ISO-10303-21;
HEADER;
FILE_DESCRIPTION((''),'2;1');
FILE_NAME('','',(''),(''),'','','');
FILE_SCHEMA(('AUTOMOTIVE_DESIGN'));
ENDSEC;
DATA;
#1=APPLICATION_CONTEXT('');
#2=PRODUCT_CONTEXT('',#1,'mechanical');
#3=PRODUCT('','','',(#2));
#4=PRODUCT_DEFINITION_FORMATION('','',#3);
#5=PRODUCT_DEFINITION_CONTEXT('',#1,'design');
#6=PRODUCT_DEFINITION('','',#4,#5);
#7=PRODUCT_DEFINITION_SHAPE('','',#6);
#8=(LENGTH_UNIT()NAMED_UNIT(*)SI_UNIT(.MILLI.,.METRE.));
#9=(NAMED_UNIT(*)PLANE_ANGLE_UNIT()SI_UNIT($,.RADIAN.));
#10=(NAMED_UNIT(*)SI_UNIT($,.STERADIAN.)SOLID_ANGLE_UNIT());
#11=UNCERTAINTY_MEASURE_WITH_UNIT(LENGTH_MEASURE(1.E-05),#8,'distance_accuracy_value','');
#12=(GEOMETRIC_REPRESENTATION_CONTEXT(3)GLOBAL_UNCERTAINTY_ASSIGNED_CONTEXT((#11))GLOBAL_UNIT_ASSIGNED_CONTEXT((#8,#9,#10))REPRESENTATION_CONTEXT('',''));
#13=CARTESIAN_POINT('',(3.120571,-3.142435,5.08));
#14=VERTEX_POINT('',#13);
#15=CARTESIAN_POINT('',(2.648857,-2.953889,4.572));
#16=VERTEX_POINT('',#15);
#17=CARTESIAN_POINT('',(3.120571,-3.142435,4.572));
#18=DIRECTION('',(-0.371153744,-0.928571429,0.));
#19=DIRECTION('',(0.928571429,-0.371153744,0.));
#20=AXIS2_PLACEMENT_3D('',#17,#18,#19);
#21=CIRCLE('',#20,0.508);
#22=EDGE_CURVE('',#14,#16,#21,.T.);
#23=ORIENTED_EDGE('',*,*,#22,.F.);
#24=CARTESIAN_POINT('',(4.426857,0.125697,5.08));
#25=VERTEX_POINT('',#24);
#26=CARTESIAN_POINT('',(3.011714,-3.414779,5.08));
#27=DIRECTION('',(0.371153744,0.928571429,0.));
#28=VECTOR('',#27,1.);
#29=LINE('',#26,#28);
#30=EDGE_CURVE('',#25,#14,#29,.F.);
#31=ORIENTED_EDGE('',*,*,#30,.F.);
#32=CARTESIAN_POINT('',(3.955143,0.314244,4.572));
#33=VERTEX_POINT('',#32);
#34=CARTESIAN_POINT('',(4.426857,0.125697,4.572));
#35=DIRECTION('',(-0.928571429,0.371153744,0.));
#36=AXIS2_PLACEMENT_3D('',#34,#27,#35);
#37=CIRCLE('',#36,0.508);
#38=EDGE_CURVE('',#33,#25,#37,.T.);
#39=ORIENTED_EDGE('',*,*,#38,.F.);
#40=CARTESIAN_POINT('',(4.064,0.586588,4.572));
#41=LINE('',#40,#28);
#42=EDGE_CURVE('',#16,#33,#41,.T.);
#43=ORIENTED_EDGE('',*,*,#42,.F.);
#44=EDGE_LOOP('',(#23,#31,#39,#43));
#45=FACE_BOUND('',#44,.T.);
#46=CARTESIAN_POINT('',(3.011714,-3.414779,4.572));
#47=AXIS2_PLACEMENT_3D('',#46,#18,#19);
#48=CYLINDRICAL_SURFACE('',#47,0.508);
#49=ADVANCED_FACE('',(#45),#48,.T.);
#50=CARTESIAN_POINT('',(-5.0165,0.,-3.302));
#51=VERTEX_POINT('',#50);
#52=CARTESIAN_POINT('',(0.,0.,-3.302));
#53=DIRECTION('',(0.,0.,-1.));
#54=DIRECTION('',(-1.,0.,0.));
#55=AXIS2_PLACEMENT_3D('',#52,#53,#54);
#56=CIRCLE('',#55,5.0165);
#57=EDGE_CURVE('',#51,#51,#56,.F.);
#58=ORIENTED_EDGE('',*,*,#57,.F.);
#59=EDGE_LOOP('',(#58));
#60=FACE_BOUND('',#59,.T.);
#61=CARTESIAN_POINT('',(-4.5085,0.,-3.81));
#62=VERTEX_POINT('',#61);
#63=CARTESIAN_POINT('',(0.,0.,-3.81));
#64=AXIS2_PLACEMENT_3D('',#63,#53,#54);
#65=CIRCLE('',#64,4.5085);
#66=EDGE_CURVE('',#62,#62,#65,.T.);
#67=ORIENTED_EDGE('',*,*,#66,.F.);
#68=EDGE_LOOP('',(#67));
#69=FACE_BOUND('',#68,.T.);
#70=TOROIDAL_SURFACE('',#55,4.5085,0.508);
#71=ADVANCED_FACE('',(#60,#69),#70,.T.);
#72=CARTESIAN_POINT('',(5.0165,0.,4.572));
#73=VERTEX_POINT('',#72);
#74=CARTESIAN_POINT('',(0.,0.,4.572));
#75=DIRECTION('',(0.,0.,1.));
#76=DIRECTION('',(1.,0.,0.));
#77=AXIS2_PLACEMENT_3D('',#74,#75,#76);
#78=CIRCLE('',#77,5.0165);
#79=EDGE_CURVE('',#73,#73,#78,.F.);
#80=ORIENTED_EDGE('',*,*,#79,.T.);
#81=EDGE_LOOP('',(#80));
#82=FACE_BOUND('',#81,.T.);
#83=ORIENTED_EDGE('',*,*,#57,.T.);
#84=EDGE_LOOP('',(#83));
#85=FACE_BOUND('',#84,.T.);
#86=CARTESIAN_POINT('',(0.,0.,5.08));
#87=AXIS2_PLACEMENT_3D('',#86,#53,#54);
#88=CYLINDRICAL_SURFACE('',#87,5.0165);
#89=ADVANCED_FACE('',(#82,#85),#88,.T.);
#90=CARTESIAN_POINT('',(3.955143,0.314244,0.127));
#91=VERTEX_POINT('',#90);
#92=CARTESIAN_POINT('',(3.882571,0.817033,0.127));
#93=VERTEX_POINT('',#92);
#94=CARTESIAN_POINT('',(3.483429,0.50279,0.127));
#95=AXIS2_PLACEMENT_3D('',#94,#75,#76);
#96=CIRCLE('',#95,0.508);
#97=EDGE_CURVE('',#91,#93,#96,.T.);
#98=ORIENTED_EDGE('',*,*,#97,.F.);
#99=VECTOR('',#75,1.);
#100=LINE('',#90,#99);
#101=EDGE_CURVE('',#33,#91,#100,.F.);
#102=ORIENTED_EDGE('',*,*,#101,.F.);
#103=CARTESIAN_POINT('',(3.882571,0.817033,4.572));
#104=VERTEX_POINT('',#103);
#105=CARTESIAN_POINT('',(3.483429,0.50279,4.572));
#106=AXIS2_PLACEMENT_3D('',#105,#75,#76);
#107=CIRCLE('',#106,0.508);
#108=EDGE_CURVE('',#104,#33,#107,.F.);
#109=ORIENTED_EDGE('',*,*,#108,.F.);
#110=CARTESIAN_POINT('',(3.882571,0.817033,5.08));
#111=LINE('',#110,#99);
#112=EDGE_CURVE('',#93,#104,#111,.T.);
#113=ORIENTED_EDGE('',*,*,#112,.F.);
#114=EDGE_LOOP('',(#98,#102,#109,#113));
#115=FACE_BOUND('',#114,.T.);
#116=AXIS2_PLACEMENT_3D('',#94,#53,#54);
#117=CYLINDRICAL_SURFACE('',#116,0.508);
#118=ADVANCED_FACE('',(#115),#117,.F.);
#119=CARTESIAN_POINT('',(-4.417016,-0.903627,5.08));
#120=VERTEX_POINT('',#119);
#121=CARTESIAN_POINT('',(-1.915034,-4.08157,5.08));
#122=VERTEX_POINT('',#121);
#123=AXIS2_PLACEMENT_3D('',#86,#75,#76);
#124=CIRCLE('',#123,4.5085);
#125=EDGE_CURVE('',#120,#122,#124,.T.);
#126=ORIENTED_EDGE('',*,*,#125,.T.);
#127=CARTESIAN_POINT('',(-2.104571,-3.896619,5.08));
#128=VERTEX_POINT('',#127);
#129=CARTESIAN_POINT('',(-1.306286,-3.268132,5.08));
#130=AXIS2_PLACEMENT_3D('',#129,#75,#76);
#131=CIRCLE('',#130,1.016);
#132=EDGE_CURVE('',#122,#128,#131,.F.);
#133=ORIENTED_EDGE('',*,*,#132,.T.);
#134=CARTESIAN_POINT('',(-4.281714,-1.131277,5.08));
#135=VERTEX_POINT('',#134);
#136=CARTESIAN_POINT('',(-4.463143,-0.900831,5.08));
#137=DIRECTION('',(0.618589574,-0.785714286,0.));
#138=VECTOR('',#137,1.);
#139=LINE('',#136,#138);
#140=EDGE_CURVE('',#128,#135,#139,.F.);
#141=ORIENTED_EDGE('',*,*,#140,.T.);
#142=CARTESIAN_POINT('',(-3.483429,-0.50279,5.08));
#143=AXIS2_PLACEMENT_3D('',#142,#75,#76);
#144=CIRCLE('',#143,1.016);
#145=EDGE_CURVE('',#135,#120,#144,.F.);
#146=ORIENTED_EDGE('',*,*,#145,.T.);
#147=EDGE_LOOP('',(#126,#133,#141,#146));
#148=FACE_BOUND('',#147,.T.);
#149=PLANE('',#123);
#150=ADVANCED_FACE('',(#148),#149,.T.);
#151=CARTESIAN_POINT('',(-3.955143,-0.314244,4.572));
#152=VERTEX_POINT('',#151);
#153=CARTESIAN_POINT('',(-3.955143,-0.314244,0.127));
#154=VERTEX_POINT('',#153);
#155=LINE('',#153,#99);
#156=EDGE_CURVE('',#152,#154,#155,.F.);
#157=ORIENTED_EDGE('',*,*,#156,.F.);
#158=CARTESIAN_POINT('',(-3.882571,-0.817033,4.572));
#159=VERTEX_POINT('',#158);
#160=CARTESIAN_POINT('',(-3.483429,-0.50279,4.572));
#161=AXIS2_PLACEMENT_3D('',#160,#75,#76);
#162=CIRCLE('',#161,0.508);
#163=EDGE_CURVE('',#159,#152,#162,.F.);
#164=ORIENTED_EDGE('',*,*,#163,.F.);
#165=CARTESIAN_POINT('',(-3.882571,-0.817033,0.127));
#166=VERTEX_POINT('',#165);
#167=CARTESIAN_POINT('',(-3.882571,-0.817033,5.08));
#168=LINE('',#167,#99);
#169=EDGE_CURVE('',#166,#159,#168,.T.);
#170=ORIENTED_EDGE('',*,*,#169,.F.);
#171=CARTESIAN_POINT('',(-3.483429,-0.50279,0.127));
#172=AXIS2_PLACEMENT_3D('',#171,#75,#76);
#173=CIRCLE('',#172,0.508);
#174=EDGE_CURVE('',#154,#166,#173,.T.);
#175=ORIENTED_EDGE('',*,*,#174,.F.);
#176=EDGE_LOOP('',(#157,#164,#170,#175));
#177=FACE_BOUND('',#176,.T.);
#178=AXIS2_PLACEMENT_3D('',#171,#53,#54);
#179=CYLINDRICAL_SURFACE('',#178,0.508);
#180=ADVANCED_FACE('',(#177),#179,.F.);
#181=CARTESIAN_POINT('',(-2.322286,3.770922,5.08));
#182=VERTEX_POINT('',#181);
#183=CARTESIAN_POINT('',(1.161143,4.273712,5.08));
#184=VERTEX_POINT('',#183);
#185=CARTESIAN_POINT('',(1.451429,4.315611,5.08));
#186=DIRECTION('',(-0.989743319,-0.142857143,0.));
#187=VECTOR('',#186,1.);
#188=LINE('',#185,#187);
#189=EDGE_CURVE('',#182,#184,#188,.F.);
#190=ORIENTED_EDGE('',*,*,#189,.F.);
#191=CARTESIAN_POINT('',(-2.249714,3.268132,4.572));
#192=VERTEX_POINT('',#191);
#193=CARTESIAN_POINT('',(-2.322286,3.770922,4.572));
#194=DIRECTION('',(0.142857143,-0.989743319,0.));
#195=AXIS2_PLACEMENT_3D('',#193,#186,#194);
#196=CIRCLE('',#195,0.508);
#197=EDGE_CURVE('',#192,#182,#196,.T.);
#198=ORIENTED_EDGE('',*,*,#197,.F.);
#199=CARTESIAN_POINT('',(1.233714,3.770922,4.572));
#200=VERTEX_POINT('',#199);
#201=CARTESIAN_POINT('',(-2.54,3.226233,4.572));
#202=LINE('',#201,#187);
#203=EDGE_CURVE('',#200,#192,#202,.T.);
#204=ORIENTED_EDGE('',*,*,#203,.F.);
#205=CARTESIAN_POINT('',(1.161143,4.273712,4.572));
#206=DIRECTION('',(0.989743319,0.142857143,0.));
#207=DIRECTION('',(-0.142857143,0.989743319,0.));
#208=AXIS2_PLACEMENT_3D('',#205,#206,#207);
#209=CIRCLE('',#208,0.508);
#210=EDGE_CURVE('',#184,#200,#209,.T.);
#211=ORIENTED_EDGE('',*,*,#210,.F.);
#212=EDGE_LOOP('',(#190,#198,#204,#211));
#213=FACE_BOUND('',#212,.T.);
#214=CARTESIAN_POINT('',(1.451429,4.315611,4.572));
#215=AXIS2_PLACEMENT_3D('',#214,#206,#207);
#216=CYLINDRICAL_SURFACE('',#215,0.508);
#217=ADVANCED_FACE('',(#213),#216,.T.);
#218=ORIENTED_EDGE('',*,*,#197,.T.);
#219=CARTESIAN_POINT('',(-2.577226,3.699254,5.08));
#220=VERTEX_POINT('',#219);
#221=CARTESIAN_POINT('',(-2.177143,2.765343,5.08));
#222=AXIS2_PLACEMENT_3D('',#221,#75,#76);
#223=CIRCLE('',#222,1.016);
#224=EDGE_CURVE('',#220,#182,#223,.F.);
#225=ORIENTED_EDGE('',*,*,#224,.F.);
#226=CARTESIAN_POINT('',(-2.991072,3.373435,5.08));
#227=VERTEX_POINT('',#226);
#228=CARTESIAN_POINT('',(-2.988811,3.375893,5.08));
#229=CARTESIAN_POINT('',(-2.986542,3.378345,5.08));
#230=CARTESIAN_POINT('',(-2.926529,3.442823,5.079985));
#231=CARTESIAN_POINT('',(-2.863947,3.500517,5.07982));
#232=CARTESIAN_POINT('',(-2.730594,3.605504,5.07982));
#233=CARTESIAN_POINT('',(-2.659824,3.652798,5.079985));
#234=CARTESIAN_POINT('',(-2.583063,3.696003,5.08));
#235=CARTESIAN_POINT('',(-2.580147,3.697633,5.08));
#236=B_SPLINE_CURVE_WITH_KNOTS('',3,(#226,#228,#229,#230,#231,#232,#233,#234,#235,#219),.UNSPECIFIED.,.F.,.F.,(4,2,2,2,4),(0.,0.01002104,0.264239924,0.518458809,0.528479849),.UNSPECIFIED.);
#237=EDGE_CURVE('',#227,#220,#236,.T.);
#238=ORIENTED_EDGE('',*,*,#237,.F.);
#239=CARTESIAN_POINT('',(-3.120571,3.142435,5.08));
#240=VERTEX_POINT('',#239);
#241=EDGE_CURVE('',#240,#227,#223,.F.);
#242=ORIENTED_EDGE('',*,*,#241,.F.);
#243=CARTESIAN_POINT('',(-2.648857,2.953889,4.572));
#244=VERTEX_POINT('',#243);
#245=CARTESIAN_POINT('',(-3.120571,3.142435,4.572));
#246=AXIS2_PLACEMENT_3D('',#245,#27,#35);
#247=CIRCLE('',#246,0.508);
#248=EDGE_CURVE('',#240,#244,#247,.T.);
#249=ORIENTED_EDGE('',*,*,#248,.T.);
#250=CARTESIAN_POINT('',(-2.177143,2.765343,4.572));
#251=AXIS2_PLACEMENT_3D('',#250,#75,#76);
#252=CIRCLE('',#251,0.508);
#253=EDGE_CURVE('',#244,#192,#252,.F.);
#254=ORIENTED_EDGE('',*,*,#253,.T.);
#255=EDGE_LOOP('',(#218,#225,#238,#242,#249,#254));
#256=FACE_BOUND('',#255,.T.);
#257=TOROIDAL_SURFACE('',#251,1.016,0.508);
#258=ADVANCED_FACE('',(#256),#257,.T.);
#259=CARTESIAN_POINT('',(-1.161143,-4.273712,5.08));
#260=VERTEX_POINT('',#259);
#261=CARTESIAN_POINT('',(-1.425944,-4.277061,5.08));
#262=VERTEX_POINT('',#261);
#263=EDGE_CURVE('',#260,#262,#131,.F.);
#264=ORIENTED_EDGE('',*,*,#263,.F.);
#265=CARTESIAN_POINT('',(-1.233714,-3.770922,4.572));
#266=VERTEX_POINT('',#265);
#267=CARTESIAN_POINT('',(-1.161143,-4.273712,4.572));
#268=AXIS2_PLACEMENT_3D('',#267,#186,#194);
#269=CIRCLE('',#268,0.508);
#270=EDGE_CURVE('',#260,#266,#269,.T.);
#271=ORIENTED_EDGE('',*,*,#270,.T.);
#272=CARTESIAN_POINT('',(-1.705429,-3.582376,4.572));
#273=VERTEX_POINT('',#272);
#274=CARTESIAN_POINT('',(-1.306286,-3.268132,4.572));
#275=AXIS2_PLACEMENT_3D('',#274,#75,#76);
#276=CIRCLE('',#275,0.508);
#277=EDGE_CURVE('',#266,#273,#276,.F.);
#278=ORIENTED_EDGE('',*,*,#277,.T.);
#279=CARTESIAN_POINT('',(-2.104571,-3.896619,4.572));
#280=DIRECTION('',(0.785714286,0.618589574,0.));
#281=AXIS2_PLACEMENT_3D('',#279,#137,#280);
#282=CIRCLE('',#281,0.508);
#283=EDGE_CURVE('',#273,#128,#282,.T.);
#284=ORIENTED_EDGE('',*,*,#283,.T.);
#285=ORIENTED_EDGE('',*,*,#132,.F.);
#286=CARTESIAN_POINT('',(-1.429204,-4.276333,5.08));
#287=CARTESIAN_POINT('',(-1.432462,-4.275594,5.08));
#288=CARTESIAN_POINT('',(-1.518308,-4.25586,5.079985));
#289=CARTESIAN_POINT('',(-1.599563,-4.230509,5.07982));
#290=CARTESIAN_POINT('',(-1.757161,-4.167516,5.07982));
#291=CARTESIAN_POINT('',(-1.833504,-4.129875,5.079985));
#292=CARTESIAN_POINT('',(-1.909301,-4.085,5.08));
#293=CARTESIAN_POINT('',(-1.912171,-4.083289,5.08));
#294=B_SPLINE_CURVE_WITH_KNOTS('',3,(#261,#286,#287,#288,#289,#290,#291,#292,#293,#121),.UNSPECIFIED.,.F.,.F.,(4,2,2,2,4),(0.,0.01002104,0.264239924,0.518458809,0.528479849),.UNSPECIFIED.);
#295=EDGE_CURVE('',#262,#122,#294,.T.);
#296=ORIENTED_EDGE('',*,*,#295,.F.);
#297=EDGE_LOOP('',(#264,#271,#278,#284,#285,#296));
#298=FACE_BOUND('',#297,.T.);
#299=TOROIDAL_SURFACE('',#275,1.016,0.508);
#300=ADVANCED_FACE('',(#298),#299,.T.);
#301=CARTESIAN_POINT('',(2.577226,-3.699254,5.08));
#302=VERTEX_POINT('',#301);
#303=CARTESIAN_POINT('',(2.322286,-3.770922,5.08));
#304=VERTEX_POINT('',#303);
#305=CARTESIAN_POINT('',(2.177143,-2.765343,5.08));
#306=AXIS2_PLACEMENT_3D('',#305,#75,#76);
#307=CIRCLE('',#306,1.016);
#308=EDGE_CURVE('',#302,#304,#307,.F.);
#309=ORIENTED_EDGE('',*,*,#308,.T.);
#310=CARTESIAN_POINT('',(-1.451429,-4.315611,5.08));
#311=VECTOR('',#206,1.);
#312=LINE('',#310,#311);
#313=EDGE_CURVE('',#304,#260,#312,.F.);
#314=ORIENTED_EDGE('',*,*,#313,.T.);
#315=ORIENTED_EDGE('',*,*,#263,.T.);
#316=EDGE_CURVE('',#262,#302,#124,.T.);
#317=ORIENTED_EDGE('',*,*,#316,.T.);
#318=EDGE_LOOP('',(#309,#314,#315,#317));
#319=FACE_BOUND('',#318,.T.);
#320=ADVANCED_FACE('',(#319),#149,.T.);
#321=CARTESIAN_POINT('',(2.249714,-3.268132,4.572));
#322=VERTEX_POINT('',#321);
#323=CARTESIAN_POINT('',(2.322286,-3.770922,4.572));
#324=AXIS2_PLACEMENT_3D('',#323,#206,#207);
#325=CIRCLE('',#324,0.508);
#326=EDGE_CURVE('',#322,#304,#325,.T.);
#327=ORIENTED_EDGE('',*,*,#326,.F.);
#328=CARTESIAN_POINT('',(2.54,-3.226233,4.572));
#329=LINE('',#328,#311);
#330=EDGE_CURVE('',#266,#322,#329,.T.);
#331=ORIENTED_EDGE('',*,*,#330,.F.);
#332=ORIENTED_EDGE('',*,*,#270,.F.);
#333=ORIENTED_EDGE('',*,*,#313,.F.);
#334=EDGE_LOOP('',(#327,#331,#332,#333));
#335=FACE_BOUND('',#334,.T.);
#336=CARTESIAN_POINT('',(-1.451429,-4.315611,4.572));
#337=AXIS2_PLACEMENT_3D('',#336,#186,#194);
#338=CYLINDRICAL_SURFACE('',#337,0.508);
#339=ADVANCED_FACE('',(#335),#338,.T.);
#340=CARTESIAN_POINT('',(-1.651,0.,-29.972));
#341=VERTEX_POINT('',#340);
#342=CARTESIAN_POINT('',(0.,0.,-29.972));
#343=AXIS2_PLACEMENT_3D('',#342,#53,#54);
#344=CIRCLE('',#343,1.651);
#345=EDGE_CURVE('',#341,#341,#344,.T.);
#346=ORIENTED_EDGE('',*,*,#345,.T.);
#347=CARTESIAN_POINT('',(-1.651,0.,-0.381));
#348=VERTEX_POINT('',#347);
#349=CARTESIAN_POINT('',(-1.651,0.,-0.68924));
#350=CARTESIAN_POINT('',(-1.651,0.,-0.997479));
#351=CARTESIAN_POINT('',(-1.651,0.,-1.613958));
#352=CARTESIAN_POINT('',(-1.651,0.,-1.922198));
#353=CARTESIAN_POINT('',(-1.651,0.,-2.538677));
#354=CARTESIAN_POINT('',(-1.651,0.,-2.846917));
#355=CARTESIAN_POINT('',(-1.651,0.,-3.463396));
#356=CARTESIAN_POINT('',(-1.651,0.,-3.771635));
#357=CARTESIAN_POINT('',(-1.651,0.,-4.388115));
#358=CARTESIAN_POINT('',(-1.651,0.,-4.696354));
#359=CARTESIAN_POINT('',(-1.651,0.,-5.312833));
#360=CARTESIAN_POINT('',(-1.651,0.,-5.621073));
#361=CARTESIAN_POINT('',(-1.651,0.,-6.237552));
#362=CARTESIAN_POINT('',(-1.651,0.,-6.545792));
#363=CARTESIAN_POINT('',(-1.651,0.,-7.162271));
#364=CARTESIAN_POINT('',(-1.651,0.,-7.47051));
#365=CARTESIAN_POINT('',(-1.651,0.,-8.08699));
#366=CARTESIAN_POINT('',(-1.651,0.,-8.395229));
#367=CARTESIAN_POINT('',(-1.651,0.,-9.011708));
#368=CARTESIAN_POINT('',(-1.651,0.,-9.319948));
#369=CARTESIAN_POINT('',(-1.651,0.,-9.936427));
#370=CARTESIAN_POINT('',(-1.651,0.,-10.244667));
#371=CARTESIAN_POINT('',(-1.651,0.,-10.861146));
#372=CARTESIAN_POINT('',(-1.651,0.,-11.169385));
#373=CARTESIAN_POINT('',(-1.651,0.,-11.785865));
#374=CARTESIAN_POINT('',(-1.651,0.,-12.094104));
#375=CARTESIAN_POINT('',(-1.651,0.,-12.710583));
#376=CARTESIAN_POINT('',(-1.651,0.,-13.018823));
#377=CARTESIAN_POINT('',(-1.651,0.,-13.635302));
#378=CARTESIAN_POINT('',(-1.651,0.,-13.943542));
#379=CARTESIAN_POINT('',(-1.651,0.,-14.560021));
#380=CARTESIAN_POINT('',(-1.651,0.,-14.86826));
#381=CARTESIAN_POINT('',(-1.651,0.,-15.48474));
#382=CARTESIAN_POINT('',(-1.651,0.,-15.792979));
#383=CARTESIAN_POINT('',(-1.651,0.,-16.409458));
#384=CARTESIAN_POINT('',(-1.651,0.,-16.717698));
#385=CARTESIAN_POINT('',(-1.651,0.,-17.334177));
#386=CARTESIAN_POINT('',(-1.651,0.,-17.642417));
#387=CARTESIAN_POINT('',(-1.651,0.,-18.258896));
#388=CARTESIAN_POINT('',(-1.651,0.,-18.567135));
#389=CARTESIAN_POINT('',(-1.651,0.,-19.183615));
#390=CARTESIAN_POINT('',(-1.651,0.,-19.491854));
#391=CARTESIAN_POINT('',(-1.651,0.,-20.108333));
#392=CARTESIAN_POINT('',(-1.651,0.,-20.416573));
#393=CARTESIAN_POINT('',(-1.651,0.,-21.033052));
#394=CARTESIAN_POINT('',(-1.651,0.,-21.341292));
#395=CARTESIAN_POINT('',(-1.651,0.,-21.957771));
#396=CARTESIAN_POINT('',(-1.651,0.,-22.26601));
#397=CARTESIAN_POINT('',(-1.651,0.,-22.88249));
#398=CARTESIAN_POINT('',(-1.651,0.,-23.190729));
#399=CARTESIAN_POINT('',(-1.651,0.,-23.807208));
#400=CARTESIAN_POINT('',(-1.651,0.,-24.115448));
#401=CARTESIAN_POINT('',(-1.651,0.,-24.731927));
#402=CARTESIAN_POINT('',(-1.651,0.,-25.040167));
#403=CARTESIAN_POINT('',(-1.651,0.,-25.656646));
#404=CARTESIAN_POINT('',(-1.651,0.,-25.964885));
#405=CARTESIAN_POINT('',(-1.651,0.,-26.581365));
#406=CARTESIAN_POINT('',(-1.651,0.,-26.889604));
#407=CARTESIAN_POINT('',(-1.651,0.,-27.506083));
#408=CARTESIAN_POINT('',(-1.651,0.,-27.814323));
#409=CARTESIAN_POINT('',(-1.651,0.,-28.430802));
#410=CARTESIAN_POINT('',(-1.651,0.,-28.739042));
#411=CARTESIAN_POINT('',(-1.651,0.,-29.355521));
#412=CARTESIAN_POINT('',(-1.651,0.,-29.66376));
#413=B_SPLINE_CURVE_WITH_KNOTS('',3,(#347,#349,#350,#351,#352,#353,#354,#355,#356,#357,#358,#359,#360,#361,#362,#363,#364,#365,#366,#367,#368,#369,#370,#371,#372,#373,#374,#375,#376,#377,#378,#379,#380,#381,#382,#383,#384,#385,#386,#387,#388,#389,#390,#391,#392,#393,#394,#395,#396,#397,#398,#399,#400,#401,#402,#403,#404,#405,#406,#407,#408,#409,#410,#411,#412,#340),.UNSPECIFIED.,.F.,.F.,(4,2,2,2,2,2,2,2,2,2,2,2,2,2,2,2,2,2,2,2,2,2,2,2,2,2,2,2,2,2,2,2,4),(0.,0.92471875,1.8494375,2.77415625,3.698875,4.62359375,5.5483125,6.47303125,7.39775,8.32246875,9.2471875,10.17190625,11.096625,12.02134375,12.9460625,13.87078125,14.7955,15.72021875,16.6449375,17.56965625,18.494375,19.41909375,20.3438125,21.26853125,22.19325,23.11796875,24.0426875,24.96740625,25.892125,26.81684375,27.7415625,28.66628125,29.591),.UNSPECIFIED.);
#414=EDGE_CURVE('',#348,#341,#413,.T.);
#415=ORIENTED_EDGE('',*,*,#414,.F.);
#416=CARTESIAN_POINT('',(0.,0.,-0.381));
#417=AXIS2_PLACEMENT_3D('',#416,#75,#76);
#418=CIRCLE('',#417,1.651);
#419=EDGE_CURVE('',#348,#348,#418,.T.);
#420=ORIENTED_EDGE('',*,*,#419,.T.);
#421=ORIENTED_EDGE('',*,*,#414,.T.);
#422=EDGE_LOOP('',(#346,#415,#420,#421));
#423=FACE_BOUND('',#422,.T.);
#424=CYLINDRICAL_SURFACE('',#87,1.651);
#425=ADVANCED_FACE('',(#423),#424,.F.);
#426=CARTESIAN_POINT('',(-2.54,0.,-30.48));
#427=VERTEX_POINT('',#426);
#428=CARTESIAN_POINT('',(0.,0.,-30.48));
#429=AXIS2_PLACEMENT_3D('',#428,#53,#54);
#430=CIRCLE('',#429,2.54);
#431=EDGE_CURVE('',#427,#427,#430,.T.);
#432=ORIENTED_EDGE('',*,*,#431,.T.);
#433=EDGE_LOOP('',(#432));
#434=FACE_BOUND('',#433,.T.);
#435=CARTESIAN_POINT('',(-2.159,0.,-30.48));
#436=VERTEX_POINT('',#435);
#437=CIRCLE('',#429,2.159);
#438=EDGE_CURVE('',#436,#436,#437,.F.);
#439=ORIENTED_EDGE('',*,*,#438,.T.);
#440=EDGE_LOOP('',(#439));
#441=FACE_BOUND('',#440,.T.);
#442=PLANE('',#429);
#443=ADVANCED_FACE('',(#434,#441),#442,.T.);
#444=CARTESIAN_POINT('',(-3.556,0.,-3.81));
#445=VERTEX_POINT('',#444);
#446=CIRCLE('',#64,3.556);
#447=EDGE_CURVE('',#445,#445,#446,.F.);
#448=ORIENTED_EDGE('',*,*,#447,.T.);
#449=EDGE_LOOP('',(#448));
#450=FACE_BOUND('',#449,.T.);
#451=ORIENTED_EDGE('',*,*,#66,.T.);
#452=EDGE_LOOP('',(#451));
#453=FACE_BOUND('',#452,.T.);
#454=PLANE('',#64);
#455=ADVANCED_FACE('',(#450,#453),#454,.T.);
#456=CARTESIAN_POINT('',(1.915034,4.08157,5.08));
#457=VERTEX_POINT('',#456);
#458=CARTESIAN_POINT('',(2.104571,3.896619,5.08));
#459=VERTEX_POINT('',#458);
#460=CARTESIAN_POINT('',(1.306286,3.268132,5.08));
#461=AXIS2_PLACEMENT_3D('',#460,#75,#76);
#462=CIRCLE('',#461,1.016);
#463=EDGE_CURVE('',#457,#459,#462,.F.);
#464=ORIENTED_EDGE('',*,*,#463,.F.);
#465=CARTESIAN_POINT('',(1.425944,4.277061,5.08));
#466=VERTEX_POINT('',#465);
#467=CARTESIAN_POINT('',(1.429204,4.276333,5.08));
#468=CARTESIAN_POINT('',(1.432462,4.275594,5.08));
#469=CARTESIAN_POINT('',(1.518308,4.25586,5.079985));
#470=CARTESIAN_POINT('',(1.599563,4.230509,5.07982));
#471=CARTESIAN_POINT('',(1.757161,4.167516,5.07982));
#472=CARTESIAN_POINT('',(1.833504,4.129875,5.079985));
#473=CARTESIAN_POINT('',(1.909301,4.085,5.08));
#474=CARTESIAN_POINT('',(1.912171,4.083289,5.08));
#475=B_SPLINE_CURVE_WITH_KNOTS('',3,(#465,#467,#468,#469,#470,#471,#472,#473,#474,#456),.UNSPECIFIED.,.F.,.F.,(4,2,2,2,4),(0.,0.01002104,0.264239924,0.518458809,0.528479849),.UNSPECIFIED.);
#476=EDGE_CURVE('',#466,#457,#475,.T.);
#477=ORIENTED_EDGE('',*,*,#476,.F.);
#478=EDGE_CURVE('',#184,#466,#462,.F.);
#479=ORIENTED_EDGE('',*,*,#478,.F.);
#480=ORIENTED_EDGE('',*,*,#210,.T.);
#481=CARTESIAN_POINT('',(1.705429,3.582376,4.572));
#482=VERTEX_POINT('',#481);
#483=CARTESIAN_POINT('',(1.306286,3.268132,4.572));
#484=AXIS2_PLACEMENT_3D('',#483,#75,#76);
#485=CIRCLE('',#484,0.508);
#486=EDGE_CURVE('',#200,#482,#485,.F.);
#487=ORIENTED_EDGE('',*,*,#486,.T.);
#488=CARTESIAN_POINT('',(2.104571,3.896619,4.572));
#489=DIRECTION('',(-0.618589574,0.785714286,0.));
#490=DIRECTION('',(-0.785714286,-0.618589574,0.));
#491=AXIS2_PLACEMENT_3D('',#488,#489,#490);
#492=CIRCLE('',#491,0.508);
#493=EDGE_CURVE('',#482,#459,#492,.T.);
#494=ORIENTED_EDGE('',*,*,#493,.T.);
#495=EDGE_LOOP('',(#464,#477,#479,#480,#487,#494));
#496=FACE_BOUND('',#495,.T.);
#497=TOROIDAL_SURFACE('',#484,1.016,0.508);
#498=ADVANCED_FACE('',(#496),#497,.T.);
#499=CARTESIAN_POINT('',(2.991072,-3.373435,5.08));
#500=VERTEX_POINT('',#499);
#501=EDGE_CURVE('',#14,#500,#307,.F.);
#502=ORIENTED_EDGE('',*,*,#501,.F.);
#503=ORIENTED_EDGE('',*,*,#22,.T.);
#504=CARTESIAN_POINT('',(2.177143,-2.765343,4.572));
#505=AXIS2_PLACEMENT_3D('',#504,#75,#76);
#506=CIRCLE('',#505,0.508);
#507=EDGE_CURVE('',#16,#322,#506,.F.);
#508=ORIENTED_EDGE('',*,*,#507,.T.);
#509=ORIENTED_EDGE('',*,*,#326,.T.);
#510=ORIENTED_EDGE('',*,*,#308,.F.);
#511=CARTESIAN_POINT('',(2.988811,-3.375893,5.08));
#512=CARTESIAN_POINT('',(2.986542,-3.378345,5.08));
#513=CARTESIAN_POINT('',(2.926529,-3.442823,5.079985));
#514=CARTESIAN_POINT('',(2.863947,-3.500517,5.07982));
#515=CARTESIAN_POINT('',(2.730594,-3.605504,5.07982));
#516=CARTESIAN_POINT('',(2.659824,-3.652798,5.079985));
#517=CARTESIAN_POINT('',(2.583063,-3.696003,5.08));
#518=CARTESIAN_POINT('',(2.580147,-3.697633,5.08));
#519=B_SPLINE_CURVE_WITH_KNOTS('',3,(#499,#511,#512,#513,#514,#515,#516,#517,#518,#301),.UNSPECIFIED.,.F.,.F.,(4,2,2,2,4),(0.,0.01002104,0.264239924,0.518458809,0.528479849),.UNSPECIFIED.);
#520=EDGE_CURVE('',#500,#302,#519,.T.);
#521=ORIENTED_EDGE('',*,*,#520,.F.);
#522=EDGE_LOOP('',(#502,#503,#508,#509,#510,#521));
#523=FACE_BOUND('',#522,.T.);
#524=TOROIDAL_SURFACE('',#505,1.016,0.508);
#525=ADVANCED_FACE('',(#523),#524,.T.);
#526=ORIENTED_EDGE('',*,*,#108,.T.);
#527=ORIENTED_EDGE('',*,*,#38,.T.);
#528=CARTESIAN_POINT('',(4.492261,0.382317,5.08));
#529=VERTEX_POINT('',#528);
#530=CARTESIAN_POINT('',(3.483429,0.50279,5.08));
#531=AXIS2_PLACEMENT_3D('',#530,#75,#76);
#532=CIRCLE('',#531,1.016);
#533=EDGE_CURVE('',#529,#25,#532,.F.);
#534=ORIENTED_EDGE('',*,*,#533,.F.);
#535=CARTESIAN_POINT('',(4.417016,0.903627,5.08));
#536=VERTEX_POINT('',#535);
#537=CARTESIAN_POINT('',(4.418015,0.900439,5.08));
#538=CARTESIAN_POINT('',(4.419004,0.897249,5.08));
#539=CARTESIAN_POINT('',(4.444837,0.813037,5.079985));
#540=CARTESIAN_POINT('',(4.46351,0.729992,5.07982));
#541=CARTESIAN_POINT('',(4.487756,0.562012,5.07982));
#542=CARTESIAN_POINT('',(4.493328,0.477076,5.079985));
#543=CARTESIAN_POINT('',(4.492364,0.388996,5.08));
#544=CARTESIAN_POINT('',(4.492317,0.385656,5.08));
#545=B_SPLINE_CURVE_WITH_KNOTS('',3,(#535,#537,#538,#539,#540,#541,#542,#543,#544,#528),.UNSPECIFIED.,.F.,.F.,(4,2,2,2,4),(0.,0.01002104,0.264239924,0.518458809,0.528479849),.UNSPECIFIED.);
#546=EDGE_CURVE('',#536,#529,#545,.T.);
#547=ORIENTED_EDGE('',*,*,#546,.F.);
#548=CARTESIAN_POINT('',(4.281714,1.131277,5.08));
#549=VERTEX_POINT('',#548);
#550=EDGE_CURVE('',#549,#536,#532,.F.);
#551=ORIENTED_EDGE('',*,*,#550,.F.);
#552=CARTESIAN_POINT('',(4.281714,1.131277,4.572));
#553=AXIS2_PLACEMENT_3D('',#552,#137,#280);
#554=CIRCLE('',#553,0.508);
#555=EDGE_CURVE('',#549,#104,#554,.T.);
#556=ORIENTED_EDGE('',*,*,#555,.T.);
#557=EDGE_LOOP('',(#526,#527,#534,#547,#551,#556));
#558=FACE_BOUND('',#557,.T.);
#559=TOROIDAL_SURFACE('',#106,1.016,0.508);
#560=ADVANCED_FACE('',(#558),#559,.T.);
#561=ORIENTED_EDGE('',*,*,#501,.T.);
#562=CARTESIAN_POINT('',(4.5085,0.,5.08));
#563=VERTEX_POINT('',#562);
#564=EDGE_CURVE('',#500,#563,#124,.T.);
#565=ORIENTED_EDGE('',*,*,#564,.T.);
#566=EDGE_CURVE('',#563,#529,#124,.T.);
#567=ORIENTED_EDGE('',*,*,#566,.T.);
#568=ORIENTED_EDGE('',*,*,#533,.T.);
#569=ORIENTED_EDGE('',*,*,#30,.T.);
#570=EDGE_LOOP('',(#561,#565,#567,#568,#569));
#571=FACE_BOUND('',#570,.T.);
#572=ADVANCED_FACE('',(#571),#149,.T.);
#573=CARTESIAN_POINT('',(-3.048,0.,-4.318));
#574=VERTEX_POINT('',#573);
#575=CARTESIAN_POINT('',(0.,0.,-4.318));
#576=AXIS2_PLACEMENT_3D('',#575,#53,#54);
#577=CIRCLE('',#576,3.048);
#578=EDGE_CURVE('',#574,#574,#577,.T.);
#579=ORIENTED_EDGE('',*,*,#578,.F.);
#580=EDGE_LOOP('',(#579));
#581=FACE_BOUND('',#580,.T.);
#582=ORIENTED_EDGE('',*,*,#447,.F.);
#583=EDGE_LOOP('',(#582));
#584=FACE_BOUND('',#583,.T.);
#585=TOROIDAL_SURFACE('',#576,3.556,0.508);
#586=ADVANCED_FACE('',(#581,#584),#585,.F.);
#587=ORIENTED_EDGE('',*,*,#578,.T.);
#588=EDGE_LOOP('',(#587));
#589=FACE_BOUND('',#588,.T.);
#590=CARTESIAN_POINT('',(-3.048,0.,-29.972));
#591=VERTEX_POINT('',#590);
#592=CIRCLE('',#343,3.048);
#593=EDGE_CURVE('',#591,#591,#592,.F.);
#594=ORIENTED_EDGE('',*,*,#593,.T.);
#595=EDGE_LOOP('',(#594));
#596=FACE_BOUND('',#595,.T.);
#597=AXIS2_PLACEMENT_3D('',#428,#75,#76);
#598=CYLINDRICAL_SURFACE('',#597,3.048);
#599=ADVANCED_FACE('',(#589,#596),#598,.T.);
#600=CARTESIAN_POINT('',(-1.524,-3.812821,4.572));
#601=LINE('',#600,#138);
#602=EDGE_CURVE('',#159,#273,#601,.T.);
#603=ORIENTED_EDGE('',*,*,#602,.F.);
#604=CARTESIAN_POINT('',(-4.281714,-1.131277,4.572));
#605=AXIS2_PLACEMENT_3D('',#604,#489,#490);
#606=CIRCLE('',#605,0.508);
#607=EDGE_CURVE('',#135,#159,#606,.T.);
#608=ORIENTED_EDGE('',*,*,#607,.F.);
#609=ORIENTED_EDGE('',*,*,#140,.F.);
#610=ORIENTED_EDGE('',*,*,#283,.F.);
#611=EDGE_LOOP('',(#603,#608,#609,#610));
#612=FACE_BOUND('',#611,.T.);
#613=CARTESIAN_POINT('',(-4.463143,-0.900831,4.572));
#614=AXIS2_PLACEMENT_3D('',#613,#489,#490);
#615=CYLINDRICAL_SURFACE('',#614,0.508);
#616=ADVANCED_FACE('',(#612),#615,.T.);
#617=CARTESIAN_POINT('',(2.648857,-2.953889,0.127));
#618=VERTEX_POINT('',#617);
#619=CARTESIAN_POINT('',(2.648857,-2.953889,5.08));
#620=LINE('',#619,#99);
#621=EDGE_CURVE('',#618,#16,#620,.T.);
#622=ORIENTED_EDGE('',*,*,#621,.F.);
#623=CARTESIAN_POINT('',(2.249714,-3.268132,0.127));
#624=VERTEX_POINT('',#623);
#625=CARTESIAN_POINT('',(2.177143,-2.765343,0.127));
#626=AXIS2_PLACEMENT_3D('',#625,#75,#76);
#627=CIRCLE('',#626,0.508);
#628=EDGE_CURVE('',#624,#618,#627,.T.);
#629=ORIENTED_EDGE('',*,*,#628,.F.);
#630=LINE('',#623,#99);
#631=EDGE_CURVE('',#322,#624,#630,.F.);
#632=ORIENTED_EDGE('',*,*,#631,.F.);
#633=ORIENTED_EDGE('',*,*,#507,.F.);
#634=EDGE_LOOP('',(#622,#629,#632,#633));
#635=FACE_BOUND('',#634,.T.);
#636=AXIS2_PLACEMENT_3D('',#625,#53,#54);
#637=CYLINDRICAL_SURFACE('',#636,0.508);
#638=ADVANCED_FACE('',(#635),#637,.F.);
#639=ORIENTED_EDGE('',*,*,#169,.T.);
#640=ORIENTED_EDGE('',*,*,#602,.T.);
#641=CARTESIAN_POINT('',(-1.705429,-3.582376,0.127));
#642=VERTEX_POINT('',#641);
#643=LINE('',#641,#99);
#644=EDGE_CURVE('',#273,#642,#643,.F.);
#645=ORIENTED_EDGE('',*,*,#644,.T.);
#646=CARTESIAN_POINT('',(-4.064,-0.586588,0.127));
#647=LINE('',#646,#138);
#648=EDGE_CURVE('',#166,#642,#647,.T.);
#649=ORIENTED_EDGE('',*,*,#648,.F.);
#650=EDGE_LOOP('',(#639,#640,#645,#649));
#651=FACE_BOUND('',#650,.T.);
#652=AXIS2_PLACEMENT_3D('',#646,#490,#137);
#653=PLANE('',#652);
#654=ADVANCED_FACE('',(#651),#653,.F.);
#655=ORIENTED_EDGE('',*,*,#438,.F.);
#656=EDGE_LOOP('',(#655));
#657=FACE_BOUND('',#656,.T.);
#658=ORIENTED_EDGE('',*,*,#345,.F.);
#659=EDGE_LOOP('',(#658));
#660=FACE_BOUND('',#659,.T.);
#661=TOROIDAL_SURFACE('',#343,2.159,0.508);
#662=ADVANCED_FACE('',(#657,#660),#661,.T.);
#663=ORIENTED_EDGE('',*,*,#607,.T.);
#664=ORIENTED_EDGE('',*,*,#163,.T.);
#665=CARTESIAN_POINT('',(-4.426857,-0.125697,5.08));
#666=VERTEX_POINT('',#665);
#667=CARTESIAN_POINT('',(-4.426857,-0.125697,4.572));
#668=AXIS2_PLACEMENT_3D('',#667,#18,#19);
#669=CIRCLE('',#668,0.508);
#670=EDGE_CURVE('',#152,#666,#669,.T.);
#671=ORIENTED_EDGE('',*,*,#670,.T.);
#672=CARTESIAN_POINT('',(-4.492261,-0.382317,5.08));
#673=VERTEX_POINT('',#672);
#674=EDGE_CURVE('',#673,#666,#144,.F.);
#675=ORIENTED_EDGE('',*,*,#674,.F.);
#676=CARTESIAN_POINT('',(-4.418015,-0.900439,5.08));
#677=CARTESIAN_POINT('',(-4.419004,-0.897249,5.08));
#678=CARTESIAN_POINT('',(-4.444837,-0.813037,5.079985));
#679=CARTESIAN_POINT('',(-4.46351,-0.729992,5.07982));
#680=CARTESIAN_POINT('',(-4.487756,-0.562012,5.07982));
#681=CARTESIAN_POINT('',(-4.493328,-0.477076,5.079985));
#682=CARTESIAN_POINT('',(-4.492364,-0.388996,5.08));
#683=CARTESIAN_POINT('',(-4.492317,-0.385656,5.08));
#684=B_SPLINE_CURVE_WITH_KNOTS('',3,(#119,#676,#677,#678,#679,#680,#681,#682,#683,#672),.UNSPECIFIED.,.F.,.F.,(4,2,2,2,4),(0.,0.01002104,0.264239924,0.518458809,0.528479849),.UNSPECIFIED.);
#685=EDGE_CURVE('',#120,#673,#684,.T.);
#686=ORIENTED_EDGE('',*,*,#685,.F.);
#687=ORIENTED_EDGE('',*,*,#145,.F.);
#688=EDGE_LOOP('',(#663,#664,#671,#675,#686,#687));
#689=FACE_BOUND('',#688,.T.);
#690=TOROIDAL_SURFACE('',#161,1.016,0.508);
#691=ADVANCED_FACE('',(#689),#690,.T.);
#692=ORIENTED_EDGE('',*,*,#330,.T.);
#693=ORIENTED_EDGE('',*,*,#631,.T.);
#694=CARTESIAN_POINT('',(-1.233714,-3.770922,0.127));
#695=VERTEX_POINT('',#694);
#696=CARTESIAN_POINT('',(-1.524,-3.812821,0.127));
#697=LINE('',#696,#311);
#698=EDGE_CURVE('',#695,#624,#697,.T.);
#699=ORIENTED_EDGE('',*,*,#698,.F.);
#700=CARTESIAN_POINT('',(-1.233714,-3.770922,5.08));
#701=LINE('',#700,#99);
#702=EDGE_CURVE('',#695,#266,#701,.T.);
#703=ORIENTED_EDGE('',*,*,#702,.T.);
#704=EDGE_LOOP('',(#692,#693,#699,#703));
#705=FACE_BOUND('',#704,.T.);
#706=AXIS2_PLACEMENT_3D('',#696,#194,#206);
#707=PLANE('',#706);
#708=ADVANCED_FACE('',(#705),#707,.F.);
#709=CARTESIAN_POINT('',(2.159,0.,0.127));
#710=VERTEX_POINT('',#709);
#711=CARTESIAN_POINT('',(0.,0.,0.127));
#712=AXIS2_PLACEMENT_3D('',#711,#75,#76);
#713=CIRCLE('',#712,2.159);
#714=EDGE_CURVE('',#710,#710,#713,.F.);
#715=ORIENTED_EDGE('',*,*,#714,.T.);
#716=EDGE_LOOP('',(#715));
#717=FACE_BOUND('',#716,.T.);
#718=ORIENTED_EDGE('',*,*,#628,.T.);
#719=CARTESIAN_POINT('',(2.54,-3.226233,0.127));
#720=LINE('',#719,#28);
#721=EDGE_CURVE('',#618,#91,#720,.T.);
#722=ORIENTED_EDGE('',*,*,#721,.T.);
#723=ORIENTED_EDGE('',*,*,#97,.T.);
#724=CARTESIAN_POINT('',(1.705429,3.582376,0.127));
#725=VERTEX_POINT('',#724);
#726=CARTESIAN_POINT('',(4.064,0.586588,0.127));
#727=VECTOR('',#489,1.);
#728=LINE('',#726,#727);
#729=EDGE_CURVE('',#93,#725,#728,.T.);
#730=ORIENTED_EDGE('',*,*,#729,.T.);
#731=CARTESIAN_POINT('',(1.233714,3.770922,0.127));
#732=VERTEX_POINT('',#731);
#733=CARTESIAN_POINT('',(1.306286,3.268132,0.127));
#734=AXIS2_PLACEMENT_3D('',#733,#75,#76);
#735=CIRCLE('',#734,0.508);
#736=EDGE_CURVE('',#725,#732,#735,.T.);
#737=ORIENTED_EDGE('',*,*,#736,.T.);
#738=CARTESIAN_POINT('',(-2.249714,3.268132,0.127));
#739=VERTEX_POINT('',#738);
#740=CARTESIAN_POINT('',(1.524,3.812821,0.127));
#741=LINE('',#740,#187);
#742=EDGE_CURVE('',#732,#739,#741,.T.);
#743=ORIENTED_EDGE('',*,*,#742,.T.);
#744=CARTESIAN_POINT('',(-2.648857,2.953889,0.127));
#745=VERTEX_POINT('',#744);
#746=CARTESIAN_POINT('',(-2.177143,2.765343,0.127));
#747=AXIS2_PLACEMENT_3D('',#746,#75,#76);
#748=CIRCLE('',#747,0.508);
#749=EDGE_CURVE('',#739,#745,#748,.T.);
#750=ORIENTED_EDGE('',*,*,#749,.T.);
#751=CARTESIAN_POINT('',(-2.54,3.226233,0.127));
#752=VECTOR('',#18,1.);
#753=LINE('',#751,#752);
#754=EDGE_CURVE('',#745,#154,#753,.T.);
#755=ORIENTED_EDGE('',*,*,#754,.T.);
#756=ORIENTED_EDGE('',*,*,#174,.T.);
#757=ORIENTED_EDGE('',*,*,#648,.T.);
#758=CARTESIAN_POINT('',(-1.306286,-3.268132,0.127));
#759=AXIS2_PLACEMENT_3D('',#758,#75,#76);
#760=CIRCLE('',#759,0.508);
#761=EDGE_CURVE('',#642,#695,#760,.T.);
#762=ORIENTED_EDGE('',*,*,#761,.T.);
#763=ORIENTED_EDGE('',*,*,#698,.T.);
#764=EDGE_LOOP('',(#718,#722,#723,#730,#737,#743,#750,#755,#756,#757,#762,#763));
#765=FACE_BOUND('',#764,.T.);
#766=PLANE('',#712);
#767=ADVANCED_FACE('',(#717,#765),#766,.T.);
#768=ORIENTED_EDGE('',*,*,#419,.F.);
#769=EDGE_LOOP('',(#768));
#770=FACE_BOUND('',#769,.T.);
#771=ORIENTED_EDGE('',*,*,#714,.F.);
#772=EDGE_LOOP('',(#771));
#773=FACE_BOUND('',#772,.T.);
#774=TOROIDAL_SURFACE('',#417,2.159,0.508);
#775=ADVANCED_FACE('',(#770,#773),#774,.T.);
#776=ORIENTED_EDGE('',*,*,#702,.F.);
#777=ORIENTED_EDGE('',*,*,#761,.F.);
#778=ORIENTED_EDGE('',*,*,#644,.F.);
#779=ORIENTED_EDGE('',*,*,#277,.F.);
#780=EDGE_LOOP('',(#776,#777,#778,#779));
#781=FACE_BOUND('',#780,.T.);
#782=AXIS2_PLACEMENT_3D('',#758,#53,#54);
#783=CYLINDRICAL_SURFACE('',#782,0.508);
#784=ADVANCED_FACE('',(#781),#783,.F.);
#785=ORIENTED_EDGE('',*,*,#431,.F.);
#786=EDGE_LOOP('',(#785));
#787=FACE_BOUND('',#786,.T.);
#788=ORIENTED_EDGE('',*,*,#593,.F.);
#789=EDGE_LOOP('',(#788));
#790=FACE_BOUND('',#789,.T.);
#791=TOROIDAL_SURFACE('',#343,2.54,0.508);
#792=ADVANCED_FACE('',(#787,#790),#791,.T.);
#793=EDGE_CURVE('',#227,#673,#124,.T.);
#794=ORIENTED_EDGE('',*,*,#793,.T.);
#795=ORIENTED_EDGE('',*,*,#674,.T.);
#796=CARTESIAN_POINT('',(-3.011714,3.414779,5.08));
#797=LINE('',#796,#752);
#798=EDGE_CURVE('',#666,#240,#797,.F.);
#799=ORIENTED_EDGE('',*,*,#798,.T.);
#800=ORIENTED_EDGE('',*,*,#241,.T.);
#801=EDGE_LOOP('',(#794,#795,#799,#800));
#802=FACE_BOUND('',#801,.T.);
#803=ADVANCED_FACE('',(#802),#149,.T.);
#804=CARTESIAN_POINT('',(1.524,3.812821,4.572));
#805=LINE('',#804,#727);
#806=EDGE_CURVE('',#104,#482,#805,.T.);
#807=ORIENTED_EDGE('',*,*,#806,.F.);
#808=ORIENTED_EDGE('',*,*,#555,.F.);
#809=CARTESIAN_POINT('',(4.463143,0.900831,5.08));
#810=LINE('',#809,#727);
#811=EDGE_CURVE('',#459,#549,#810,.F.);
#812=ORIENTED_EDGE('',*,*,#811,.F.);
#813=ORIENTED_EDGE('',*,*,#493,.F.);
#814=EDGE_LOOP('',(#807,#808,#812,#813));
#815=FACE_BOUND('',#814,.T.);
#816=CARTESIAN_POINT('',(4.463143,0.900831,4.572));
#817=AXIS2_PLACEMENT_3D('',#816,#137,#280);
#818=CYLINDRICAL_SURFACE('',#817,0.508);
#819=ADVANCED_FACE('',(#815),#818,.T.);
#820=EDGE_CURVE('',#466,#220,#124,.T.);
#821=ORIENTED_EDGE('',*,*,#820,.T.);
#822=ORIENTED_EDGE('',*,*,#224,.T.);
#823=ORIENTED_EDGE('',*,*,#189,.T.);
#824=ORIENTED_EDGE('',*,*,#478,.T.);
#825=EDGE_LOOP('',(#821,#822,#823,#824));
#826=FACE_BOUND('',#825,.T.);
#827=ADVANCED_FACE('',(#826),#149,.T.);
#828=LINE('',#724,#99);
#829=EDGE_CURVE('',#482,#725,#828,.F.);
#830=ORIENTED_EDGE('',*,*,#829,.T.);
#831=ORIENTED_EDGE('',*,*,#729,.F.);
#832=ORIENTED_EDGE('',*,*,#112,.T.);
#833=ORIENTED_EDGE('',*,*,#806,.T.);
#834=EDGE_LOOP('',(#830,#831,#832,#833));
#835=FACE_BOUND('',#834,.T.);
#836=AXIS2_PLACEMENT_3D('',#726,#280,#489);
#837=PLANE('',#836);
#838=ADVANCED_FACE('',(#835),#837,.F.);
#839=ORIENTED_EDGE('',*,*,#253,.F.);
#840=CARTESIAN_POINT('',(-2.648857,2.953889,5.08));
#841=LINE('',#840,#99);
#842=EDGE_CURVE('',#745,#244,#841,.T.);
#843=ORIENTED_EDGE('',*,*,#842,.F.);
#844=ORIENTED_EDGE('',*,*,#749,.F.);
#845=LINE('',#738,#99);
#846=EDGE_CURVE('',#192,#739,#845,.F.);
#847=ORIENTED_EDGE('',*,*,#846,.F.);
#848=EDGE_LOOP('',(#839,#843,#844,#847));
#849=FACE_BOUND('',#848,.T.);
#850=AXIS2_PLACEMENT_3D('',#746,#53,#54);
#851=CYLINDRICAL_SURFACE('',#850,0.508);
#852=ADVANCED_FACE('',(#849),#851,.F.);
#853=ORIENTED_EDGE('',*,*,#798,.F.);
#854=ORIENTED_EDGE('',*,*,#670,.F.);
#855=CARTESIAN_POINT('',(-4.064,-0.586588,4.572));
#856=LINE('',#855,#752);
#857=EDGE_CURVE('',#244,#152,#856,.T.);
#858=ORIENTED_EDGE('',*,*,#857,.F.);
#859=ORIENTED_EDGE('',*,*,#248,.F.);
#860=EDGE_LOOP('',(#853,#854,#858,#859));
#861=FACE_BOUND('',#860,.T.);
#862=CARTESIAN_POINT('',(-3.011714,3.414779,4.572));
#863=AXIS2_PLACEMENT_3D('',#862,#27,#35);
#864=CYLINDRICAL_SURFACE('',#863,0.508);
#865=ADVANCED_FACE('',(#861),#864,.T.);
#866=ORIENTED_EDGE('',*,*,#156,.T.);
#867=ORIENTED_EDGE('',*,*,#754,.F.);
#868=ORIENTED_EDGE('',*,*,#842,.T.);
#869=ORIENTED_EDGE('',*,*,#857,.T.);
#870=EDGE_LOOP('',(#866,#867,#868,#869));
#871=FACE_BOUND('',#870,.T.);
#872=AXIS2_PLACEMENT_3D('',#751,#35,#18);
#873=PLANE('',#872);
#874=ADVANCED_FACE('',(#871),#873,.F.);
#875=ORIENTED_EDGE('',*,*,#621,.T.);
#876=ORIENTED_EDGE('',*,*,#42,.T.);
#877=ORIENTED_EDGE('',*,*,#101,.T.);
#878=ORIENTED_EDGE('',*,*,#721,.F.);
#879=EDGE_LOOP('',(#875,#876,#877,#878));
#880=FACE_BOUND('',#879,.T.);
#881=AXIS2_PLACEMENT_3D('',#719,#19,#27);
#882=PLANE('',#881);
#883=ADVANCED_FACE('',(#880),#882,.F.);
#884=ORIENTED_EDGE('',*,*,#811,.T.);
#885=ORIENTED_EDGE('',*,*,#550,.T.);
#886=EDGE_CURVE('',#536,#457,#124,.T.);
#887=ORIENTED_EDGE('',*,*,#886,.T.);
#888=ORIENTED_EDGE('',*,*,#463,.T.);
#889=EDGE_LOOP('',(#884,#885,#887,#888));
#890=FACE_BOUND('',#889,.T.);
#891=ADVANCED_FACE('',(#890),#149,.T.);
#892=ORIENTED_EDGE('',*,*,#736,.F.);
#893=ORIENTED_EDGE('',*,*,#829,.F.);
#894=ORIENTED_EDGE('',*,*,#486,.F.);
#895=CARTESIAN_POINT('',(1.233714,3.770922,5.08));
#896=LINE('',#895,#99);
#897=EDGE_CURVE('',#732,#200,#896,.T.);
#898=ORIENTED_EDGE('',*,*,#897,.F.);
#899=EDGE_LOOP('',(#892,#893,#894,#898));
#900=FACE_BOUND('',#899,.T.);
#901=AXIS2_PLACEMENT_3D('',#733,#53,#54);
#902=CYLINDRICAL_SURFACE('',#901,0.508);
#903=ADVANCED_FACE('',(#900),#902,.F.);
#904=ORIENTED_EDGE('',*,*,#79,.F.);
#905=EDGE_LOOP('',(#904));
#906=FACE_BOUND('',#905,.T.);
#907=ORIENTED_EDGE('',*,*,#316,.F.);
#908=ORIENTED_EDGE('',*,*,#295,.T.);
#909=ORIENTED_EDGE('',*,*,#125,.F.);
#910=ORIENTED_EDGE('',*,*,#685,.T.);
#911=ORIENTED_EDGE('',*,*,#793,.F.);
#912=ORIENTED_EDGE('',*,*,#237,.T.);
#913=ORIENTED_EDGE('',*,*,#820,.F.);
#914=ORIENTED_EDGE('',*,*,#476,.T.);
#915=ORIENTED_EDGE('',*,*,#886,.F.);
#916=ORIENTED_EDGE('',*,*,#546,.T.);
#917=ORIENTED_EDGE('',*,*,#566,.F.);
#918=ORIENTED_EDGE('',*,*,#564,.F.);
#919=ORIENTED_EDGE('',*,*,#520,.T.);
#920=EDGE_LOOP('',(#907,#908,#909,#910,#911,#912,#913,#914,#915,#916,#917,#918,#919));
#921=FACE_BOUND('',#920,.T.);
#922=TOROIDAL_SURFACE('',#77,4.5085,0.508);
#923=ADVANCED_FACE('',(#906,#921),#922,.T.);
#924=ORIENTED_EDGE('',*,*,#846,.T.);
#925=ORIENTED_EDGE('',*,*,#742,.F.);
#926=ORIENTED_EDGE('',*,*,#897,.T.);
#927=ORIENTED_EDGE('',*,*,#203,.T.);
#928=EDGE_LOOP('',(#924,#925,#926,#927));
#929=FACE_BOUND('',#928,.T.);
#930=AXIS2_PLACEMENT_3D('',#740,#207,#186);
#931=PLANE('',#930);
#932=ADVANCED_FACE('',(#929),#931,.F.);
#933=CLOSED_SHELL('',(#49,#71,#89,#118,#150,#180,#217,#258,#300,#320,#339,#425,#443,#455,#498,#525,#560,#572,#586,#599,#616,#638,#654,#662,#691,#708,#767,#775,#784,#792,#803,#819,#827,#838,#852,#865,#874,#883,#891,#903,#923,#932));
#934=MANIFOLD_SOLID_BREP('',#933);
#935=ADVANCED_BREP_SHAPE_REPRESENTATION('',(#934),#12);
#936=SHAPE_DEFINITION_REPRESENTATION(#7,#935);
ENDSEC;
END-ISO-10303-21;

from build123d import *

# Parameters (mm, degrees)
SKETCH1_R           = 5.0165
BOSS_EXTRUDE1_DEPTH = 5.08
BOSS_EXTRUDE2_START = 3.81
SKETCH3_R           = 5.0165
BOSS_EXTRUDE2_DEPTH = 3.81
SKETCH5_R           = 3.048
BOSS_EXTRUDE3_DEPTH = 26.67
SKETCH6_R           = 1.651
CUT_EXTRUDE3_DEPTH  = 37.260779701
CUT_EXTRUDE4_DEPTH  = 4.953
FILLET1_R           = 0.508


with BuildPart() as part:
    # Sketch1 → Boss-Extrude1 (new body)
    with BuildSketch(Plane.XY):
        Circle(SKETCH1_R)
    extrude(amount=BOSS_EXTRUDE1_DEPTH)

    # Sketch3 → Boss-Extrude2 (add)
    with BuildSketch(Plane(origin=(0, 0, 0), x_dir=(-1, 0, 0), z_dir=(0, 0, -1)).offset(BOSS_EXTRUDE2_START)):
        Circle(SKETCH3_R)
    extrude(amount=-BOSS_EXTRUDE2_DEPTH)

    # Sketch5 → Boss-Extrude3 (add)
    with BuildSketch(Plane(origin=(0, 0, -3.81), x_dir=(-1, 0, 0), z_dir=(0, 0, -1))):
        Circle(SKETCH5_R)
    extrude(amount=BOSS_EXTRUDE3_DEPTH)

    # Sketch6 → Cut-Extrude3 (cut, through all)
    with BuildSketch(Plane(origin=(0, 0, -30.48), x_dir=(-1, 0, 0), z_dir=(0, 0, -1))):
        Circle(SKETCH6_R)
    extrude(amount=-CUT_EXTRUDE3_DEPTH, mode=Mode.SUBTRACT)

    # Sketch8 → Cut-Extrude4 (cut)
    with BuildSketch(Plane.XY.offset(5.08)):
        Polygon((1.524, 3.812821178), (-2.54, 3.226233304), (-4.064, -0.586587873), (-1.524, -3.812821178), (2.54, -3.226233304), (4.064, 0.586587873), align=None)
    extrude(amount=-CUT_EXTRUDE4_DEPTH, mode=Mode.SUBTRACT)

    # Fillet1
    # the kernel refuses this fillet: 0.508 mm, written as the material it adds along each edge
    with BuildSketch(Plane(origin=(1.524, 3.812821178, 5.08), x_dir=(-0.9897433186107871, -0.14285714285714157, 0), z_dir=(0, 0, -1))) as fillet1_piece_1:
        with BuildLine():
            CenterArc((FILLET1_R * 0.57735026919, -FILLET1_R), FILLET1_R, 90, 60)
            Line((-FILLET1_R * 0.288675134595, -FILLET1_R * 0.5), (0, 0))
            Line((0, 0), (FILLET1_R * 0.57735026919, 0))
        make_face()
    extrude(amount=5.686234842)
    with BuildSketch(Plane(origin=(4.064, 0.586587873, 5.08), x_dir=(-0.37115374447904703, -0.9285714285714277, 0), z_dir=(0, 0, -1)), Plane(origin=(2.54, -3.226233304, 5.08), x_dir=(-0.9897433186107876, -0.14285714285713977, 0), z_dir=(0, 0, -1)), Plane(origin=(-1.524, -3.812821178, 5.08), x_dir=(-0.6185895741317401, 0.7857142857142871, 0), z_dir=(0, 0, -1)), Plane(origin=(-4.064, -0.586587873, 5.08), x_dir=(0.3711537444790479, 0.9285714285714274, 0), z_dir=(0, 0, -1)), Plane(origin=(-2.54, 3.226233304, 5.08), x_dir=(0.9897433186107873, 0.14285714285714018, 0), z_dir=(0, 0, -1))) as fillet1_piece_2:
        with BuildLine():
            CenterArc((FILLET1_R * 0.57735026919, FILLET1_R), FILLET1_R, 210, 60)
            Line((-FILLET1_R * 0.288675134595, FILLET1_R * 0.5), (0, 0))
            Line((0, 0), (FILLET1_R * 0.57735026919, 0))
        make_face()
    extrude(amount=5.686234842)
    with BuildSketch(Plane(origin=(0, 0, -3.81), x_dir=(-1, 0, 0), z_dir=(0, -1, 0))) as fillet1_piece_3:
        with BuildLine():
            CenterArc((3.048 + FILLET1_R, FILLET1_R), FILLET1_R, 180, 90)
            Line((3.048, FILLET1_R), (3.048, 0))
            Line((3.048, 0), (3.048 + FILLET1_R, 0))
        make_face()
    revolve(axis=Axis((0, 0, -3.81), (0, 0, -1)))
    # the kernel refuses this fillet: 0.508 mm, written as the material it takes off along each edge
    with BuildSketch(Plane(origin=(0, 0, -30.48), x_dir=(-1, 0, 0), z_dir=(0, -1, 0))) as fillet1_2_piece_1:
        with BuildLine():
            CenterArc((1.651 + FILLET1_R, -FILLET1_R), FILLET1_R, 90, 90)
            Line((1.651 + FILLET1_R, 0), (1.651, 0))
            Line((1.651, 0), (1.651, -FILLET1_R))
        make_face()
    revolve(axis=Axis((0, 0, -30.48), (0, 0, -1)), mode=Mode.SUBTRACT)
    with BuildSketch(Plane(origin=(0, 0, 0.127), x_dir=(-1, 0, 0), z_dir=(0, -1, 0))) as fillet1_2_piece_2:
        with BuildLine():
            CenterArc((1.651 + FILLET1_R, FILLET1_R), FILLET1_R, 180, 90)
            Line((1.651, FILLET1_R), (1.651, 0))
            Line((1.651, 0), (1.651 + FILLET1_R, 0))
        make_face()
    revolve(axis=Axis((0, 0, 0.127), (0, 0, -1)), mode=Mode.SUBTRACT)
    with BuildSketch(Plane(origin=(0, 0, 5.08), x_dir=(1, 0, 0), z_dir=(0, -1, 0))) as fillet1_2_piece_3:
        with BuildLine():
            CenterArc((5.0165 - FILLET1_R, -FILLET1_R), FILLET1_R, 0, 90)
            Line((5.0165 - FILLET1_R, 0), (5.0165, 0))
            Line((5.0165, 0), (5.0165, -FILLET1_R))
        make_face()
    revolve(axis=Axis((0, 0, 5.08), (0, 0, 1)), mode=Mode.SUBTRACT)
    with BuildSketch(Plane(origin=(0, 0, -3.81), x_dir=(-1, 0, 0), z_dir=(0, -1, 0))) as fillet1_2_piece_4:
        with BuildLine():
            CenterArc((5.0165 - FILLET1_R, -FILLET1_R), FILLET1_R, 0, 90)
            Line((5.0165 - FILLET1_R, 0), (5.0165, 0))
            Line((5.0165, 0), (5.0165, -FILLET1_R))
        make_face()
    revolve(axis=Axis((0, 0, -3.81), (0, 0, -1)), mode=Mode.SUBTRACT)
    with BuildSketch(Plane(origin=(0, 0, -30.48), x_dir=(-1, 0, 0), z_dir=(0, -1, 0))) as fillet1_2_piece_5:
        with BuildLine():
            CenterArc((3.048 - FILLET1_R, -FILLET1_R), FILLET1_R, 0, 90)
            Line((3.048 - FILLET1_R, 0), (3.048, 0))
            Line((3.048, 0), (3.048, -FILLET1_R))
        make_face()
    revolve(axis=Axis((0, 0, -30.48), (0, 0, -1)), mode=Mode.SUBTRACT)
    # the kernel refuses this fillet: 0.508 mm, written as the material it takes off along each edge
    with BuildSketch(Plane(origin=(3.882571429, 0.81703311, 5.08), x_dir=(0.785714285714287, 0.6185895741317401, 0), z_dir=(-0.6185895741317402, 0.785714285714287, 0)), Plane(origin=(1.233714286, 3.770922044, 5.08), x_dir=(-0.14285714285714085, 0.9897433186107873, 0), z_dir=(-0.9897433186107873, -0.14285714285714085, 0)), Plane(origin=(-2.648857143, 2.953888934, 5.08), x_dir=(-0.9285714285714276, 0.3711537444790474, 0), z_dir=(-0.3711537444790474, -0.9285714285714277, 0)), Plane(origin=(-3.882571429, -0.81703311, 5.08), x_dir=(-0.7857142857142873, -0.6185895741317399, 0), z_dir=(0.6185895741317399, -0.7857142857142874, 0)), Plane(origin=(-1.233714286, -3.770922044, 5.08), x_dir=(0.14285714285714043, -0.9897433186107873, 0), z_dir=(0.9897433186107875, 0.14285714285714043, 0)), Plane(origin=(2.648857143, -2.953888934, 5.08), x_dir=(0.9285714285714277, -0.3711537444790472, 0), z_dir=(0.3711537444790472, 0.9285714285714277, 0))) as fillet1_3_piece_1:
        with BuildLine():
            CenterArc((FILLET1_R, FILLET1_R), FILLET1_R, 180, 90)
            Line((0, FILLET1_R), (0, 0))
            Line((0, 0), (FILLET1_R, 0))
        make_face()
    extrude(amount=3.519527241, mode=Mode.SUBTRACT)
    with BuildSketch(Plane(origin=(2.177142857, -2.765342832, 5.08), x_dir=(0.1428571428571401, -0.9897433186107875, 0), z_dir=(-0.9897433186107875, -0.1428571428571401, 0))) as fillet1_3_piece_2:
        with BuildLine():
            CenterArc((0.508 + FILLET1_R, -FILLET1_R), FILLET1_R, 90, 90)
            Line((0.508, -FILLET1_R), (0.508, 0))
            Line((0.508, 0), (0.508 + FILLET1_R, 0))
        make_face()
    revolve(axis=Axis((2.177142857, -2.765342832, 5.08), (0, 0, 1)), revolution_arc=60, mode=Mode.SUBTRACT)
    with BuildSketch(Plane(origin=(3.483428571, 0.502789606, 5.08), x_dir=(0.928571428571428, -0.3711537444790467, 0), z_dir=(-0.3711537444790467, -0.928571428571428, 0))) as fillet1_3_piece_3:
        with BuildLine():
            CenterArc((0.508 + FILLET1_R, -FILLET1_R), FILLET1_R, 90, 90)
            Line((0.508, -FILLET1_R), (0.508, 0))
            Line((0.508, 0), (0.508 + FILLET1_R, 0))
        make_face()
    revolve(axis=Axis((3.483428571, 0.502789606, 5.08), (0, 0, 1)), revolution_arc=60, mode=Mode.SUBTRACT)
    with BuildSketch(Plane(origin=(-1.306285714, -3.268132438, 5.08), x_dir=(-0.7857142857142874, -0.6185895741317398, 0), z_dir=(-0.6185895741317398, 0.7857142857142874, 0))) as fillet1_3_piece_4:
        with BuildLine():
            CenterArc((0.508 + FILLET1_R, -FILLET1_R), FILLET1_R, 90, 90)
            Line((0.508, -FILLET1_R), (0.508, 0))
            Line((0.508, 0), (0.508 + FILLET1_R, 0))
        make_face()
    revolve(axis=Axis((-1.306285714, -3.268132438, 5.08), (0, 0, 1)), revolution_arc=60, mode=Mode.SUBTRACT)
    with BuildSketch(Plane(origin=(-3.483428571, -0.502789606, 5.08), x_dir=(-0.9285714285714278, 0.371153744479047, 0), z_dir=(0.371153744479047, 0.9285714285714278, 0))) as fillet1_3_piece_5:
        with BuildLine():
            CenterArc((0.508 + FILLET1_R, -FILLET1_R), FILLET1_R, 90, 90)
            Line((0.508, -FILLET1_R), (0.508, 0))
            Line((0.508, 0), (0.508 + FILLET1_R, 0))
        make_face()
    revolve(axis=Axis((-3.483428571, -0.502789606, 5.08), (0, 0, 1)), revolution_arc=60, mode=Mode.SUBTRACT)
    with BuildSketch(Plane(origin=(-2.177142857, 2.765342832, 5.08), x_dir=(-0.14285714285714096, 0.9897433186107872, 0), z_dir=(0.9897433186107872, 0.14285714285714096, 0))) as fillet1_3_piece_6:
        with BuildLine():
            CenterArc((0.508 + FILLET1_R, -FILLET1_R), FILLET1_R, 90, 90)
            Line((0.508, -FILLET1_R), (0.508, 0))
            Line((0.508, 0), (0.508 + FILLET1_R, 0))
        make_face()
    revolve(axis=Axis((-2.177142857, 2.765342832, 5.08), (0, 0, 1)), revolution_arc=60, mode=Mode.SUBTRACT)
    with BuildSketch(Plane(origin=(1.306285714, 3.268132438, 5.08), x_dir=(-0.14285714285714096, 0.9897433186107872, 0), z_dir=(-0.9897433186107872, -0.14285714285714096, 0))) as fillet1_3_piece_7:
        with BuildLine():
            CenterArc((0.508 + FILLET1_R, FILLET1_R), FILLET1_R, 180, 90)
            Line((0.508, FILLET1_R), (0.508, 0))
            Line((0.508, 0), (0.508 + FILLET1_R, 0))
        make_face()
    revolve(axis=Axis((1.306285714, 3.268132438, 5.08), (0, 0, -1)), revolution_arc=60, mode=Mode.SUBTRACT)


solid = part.part
